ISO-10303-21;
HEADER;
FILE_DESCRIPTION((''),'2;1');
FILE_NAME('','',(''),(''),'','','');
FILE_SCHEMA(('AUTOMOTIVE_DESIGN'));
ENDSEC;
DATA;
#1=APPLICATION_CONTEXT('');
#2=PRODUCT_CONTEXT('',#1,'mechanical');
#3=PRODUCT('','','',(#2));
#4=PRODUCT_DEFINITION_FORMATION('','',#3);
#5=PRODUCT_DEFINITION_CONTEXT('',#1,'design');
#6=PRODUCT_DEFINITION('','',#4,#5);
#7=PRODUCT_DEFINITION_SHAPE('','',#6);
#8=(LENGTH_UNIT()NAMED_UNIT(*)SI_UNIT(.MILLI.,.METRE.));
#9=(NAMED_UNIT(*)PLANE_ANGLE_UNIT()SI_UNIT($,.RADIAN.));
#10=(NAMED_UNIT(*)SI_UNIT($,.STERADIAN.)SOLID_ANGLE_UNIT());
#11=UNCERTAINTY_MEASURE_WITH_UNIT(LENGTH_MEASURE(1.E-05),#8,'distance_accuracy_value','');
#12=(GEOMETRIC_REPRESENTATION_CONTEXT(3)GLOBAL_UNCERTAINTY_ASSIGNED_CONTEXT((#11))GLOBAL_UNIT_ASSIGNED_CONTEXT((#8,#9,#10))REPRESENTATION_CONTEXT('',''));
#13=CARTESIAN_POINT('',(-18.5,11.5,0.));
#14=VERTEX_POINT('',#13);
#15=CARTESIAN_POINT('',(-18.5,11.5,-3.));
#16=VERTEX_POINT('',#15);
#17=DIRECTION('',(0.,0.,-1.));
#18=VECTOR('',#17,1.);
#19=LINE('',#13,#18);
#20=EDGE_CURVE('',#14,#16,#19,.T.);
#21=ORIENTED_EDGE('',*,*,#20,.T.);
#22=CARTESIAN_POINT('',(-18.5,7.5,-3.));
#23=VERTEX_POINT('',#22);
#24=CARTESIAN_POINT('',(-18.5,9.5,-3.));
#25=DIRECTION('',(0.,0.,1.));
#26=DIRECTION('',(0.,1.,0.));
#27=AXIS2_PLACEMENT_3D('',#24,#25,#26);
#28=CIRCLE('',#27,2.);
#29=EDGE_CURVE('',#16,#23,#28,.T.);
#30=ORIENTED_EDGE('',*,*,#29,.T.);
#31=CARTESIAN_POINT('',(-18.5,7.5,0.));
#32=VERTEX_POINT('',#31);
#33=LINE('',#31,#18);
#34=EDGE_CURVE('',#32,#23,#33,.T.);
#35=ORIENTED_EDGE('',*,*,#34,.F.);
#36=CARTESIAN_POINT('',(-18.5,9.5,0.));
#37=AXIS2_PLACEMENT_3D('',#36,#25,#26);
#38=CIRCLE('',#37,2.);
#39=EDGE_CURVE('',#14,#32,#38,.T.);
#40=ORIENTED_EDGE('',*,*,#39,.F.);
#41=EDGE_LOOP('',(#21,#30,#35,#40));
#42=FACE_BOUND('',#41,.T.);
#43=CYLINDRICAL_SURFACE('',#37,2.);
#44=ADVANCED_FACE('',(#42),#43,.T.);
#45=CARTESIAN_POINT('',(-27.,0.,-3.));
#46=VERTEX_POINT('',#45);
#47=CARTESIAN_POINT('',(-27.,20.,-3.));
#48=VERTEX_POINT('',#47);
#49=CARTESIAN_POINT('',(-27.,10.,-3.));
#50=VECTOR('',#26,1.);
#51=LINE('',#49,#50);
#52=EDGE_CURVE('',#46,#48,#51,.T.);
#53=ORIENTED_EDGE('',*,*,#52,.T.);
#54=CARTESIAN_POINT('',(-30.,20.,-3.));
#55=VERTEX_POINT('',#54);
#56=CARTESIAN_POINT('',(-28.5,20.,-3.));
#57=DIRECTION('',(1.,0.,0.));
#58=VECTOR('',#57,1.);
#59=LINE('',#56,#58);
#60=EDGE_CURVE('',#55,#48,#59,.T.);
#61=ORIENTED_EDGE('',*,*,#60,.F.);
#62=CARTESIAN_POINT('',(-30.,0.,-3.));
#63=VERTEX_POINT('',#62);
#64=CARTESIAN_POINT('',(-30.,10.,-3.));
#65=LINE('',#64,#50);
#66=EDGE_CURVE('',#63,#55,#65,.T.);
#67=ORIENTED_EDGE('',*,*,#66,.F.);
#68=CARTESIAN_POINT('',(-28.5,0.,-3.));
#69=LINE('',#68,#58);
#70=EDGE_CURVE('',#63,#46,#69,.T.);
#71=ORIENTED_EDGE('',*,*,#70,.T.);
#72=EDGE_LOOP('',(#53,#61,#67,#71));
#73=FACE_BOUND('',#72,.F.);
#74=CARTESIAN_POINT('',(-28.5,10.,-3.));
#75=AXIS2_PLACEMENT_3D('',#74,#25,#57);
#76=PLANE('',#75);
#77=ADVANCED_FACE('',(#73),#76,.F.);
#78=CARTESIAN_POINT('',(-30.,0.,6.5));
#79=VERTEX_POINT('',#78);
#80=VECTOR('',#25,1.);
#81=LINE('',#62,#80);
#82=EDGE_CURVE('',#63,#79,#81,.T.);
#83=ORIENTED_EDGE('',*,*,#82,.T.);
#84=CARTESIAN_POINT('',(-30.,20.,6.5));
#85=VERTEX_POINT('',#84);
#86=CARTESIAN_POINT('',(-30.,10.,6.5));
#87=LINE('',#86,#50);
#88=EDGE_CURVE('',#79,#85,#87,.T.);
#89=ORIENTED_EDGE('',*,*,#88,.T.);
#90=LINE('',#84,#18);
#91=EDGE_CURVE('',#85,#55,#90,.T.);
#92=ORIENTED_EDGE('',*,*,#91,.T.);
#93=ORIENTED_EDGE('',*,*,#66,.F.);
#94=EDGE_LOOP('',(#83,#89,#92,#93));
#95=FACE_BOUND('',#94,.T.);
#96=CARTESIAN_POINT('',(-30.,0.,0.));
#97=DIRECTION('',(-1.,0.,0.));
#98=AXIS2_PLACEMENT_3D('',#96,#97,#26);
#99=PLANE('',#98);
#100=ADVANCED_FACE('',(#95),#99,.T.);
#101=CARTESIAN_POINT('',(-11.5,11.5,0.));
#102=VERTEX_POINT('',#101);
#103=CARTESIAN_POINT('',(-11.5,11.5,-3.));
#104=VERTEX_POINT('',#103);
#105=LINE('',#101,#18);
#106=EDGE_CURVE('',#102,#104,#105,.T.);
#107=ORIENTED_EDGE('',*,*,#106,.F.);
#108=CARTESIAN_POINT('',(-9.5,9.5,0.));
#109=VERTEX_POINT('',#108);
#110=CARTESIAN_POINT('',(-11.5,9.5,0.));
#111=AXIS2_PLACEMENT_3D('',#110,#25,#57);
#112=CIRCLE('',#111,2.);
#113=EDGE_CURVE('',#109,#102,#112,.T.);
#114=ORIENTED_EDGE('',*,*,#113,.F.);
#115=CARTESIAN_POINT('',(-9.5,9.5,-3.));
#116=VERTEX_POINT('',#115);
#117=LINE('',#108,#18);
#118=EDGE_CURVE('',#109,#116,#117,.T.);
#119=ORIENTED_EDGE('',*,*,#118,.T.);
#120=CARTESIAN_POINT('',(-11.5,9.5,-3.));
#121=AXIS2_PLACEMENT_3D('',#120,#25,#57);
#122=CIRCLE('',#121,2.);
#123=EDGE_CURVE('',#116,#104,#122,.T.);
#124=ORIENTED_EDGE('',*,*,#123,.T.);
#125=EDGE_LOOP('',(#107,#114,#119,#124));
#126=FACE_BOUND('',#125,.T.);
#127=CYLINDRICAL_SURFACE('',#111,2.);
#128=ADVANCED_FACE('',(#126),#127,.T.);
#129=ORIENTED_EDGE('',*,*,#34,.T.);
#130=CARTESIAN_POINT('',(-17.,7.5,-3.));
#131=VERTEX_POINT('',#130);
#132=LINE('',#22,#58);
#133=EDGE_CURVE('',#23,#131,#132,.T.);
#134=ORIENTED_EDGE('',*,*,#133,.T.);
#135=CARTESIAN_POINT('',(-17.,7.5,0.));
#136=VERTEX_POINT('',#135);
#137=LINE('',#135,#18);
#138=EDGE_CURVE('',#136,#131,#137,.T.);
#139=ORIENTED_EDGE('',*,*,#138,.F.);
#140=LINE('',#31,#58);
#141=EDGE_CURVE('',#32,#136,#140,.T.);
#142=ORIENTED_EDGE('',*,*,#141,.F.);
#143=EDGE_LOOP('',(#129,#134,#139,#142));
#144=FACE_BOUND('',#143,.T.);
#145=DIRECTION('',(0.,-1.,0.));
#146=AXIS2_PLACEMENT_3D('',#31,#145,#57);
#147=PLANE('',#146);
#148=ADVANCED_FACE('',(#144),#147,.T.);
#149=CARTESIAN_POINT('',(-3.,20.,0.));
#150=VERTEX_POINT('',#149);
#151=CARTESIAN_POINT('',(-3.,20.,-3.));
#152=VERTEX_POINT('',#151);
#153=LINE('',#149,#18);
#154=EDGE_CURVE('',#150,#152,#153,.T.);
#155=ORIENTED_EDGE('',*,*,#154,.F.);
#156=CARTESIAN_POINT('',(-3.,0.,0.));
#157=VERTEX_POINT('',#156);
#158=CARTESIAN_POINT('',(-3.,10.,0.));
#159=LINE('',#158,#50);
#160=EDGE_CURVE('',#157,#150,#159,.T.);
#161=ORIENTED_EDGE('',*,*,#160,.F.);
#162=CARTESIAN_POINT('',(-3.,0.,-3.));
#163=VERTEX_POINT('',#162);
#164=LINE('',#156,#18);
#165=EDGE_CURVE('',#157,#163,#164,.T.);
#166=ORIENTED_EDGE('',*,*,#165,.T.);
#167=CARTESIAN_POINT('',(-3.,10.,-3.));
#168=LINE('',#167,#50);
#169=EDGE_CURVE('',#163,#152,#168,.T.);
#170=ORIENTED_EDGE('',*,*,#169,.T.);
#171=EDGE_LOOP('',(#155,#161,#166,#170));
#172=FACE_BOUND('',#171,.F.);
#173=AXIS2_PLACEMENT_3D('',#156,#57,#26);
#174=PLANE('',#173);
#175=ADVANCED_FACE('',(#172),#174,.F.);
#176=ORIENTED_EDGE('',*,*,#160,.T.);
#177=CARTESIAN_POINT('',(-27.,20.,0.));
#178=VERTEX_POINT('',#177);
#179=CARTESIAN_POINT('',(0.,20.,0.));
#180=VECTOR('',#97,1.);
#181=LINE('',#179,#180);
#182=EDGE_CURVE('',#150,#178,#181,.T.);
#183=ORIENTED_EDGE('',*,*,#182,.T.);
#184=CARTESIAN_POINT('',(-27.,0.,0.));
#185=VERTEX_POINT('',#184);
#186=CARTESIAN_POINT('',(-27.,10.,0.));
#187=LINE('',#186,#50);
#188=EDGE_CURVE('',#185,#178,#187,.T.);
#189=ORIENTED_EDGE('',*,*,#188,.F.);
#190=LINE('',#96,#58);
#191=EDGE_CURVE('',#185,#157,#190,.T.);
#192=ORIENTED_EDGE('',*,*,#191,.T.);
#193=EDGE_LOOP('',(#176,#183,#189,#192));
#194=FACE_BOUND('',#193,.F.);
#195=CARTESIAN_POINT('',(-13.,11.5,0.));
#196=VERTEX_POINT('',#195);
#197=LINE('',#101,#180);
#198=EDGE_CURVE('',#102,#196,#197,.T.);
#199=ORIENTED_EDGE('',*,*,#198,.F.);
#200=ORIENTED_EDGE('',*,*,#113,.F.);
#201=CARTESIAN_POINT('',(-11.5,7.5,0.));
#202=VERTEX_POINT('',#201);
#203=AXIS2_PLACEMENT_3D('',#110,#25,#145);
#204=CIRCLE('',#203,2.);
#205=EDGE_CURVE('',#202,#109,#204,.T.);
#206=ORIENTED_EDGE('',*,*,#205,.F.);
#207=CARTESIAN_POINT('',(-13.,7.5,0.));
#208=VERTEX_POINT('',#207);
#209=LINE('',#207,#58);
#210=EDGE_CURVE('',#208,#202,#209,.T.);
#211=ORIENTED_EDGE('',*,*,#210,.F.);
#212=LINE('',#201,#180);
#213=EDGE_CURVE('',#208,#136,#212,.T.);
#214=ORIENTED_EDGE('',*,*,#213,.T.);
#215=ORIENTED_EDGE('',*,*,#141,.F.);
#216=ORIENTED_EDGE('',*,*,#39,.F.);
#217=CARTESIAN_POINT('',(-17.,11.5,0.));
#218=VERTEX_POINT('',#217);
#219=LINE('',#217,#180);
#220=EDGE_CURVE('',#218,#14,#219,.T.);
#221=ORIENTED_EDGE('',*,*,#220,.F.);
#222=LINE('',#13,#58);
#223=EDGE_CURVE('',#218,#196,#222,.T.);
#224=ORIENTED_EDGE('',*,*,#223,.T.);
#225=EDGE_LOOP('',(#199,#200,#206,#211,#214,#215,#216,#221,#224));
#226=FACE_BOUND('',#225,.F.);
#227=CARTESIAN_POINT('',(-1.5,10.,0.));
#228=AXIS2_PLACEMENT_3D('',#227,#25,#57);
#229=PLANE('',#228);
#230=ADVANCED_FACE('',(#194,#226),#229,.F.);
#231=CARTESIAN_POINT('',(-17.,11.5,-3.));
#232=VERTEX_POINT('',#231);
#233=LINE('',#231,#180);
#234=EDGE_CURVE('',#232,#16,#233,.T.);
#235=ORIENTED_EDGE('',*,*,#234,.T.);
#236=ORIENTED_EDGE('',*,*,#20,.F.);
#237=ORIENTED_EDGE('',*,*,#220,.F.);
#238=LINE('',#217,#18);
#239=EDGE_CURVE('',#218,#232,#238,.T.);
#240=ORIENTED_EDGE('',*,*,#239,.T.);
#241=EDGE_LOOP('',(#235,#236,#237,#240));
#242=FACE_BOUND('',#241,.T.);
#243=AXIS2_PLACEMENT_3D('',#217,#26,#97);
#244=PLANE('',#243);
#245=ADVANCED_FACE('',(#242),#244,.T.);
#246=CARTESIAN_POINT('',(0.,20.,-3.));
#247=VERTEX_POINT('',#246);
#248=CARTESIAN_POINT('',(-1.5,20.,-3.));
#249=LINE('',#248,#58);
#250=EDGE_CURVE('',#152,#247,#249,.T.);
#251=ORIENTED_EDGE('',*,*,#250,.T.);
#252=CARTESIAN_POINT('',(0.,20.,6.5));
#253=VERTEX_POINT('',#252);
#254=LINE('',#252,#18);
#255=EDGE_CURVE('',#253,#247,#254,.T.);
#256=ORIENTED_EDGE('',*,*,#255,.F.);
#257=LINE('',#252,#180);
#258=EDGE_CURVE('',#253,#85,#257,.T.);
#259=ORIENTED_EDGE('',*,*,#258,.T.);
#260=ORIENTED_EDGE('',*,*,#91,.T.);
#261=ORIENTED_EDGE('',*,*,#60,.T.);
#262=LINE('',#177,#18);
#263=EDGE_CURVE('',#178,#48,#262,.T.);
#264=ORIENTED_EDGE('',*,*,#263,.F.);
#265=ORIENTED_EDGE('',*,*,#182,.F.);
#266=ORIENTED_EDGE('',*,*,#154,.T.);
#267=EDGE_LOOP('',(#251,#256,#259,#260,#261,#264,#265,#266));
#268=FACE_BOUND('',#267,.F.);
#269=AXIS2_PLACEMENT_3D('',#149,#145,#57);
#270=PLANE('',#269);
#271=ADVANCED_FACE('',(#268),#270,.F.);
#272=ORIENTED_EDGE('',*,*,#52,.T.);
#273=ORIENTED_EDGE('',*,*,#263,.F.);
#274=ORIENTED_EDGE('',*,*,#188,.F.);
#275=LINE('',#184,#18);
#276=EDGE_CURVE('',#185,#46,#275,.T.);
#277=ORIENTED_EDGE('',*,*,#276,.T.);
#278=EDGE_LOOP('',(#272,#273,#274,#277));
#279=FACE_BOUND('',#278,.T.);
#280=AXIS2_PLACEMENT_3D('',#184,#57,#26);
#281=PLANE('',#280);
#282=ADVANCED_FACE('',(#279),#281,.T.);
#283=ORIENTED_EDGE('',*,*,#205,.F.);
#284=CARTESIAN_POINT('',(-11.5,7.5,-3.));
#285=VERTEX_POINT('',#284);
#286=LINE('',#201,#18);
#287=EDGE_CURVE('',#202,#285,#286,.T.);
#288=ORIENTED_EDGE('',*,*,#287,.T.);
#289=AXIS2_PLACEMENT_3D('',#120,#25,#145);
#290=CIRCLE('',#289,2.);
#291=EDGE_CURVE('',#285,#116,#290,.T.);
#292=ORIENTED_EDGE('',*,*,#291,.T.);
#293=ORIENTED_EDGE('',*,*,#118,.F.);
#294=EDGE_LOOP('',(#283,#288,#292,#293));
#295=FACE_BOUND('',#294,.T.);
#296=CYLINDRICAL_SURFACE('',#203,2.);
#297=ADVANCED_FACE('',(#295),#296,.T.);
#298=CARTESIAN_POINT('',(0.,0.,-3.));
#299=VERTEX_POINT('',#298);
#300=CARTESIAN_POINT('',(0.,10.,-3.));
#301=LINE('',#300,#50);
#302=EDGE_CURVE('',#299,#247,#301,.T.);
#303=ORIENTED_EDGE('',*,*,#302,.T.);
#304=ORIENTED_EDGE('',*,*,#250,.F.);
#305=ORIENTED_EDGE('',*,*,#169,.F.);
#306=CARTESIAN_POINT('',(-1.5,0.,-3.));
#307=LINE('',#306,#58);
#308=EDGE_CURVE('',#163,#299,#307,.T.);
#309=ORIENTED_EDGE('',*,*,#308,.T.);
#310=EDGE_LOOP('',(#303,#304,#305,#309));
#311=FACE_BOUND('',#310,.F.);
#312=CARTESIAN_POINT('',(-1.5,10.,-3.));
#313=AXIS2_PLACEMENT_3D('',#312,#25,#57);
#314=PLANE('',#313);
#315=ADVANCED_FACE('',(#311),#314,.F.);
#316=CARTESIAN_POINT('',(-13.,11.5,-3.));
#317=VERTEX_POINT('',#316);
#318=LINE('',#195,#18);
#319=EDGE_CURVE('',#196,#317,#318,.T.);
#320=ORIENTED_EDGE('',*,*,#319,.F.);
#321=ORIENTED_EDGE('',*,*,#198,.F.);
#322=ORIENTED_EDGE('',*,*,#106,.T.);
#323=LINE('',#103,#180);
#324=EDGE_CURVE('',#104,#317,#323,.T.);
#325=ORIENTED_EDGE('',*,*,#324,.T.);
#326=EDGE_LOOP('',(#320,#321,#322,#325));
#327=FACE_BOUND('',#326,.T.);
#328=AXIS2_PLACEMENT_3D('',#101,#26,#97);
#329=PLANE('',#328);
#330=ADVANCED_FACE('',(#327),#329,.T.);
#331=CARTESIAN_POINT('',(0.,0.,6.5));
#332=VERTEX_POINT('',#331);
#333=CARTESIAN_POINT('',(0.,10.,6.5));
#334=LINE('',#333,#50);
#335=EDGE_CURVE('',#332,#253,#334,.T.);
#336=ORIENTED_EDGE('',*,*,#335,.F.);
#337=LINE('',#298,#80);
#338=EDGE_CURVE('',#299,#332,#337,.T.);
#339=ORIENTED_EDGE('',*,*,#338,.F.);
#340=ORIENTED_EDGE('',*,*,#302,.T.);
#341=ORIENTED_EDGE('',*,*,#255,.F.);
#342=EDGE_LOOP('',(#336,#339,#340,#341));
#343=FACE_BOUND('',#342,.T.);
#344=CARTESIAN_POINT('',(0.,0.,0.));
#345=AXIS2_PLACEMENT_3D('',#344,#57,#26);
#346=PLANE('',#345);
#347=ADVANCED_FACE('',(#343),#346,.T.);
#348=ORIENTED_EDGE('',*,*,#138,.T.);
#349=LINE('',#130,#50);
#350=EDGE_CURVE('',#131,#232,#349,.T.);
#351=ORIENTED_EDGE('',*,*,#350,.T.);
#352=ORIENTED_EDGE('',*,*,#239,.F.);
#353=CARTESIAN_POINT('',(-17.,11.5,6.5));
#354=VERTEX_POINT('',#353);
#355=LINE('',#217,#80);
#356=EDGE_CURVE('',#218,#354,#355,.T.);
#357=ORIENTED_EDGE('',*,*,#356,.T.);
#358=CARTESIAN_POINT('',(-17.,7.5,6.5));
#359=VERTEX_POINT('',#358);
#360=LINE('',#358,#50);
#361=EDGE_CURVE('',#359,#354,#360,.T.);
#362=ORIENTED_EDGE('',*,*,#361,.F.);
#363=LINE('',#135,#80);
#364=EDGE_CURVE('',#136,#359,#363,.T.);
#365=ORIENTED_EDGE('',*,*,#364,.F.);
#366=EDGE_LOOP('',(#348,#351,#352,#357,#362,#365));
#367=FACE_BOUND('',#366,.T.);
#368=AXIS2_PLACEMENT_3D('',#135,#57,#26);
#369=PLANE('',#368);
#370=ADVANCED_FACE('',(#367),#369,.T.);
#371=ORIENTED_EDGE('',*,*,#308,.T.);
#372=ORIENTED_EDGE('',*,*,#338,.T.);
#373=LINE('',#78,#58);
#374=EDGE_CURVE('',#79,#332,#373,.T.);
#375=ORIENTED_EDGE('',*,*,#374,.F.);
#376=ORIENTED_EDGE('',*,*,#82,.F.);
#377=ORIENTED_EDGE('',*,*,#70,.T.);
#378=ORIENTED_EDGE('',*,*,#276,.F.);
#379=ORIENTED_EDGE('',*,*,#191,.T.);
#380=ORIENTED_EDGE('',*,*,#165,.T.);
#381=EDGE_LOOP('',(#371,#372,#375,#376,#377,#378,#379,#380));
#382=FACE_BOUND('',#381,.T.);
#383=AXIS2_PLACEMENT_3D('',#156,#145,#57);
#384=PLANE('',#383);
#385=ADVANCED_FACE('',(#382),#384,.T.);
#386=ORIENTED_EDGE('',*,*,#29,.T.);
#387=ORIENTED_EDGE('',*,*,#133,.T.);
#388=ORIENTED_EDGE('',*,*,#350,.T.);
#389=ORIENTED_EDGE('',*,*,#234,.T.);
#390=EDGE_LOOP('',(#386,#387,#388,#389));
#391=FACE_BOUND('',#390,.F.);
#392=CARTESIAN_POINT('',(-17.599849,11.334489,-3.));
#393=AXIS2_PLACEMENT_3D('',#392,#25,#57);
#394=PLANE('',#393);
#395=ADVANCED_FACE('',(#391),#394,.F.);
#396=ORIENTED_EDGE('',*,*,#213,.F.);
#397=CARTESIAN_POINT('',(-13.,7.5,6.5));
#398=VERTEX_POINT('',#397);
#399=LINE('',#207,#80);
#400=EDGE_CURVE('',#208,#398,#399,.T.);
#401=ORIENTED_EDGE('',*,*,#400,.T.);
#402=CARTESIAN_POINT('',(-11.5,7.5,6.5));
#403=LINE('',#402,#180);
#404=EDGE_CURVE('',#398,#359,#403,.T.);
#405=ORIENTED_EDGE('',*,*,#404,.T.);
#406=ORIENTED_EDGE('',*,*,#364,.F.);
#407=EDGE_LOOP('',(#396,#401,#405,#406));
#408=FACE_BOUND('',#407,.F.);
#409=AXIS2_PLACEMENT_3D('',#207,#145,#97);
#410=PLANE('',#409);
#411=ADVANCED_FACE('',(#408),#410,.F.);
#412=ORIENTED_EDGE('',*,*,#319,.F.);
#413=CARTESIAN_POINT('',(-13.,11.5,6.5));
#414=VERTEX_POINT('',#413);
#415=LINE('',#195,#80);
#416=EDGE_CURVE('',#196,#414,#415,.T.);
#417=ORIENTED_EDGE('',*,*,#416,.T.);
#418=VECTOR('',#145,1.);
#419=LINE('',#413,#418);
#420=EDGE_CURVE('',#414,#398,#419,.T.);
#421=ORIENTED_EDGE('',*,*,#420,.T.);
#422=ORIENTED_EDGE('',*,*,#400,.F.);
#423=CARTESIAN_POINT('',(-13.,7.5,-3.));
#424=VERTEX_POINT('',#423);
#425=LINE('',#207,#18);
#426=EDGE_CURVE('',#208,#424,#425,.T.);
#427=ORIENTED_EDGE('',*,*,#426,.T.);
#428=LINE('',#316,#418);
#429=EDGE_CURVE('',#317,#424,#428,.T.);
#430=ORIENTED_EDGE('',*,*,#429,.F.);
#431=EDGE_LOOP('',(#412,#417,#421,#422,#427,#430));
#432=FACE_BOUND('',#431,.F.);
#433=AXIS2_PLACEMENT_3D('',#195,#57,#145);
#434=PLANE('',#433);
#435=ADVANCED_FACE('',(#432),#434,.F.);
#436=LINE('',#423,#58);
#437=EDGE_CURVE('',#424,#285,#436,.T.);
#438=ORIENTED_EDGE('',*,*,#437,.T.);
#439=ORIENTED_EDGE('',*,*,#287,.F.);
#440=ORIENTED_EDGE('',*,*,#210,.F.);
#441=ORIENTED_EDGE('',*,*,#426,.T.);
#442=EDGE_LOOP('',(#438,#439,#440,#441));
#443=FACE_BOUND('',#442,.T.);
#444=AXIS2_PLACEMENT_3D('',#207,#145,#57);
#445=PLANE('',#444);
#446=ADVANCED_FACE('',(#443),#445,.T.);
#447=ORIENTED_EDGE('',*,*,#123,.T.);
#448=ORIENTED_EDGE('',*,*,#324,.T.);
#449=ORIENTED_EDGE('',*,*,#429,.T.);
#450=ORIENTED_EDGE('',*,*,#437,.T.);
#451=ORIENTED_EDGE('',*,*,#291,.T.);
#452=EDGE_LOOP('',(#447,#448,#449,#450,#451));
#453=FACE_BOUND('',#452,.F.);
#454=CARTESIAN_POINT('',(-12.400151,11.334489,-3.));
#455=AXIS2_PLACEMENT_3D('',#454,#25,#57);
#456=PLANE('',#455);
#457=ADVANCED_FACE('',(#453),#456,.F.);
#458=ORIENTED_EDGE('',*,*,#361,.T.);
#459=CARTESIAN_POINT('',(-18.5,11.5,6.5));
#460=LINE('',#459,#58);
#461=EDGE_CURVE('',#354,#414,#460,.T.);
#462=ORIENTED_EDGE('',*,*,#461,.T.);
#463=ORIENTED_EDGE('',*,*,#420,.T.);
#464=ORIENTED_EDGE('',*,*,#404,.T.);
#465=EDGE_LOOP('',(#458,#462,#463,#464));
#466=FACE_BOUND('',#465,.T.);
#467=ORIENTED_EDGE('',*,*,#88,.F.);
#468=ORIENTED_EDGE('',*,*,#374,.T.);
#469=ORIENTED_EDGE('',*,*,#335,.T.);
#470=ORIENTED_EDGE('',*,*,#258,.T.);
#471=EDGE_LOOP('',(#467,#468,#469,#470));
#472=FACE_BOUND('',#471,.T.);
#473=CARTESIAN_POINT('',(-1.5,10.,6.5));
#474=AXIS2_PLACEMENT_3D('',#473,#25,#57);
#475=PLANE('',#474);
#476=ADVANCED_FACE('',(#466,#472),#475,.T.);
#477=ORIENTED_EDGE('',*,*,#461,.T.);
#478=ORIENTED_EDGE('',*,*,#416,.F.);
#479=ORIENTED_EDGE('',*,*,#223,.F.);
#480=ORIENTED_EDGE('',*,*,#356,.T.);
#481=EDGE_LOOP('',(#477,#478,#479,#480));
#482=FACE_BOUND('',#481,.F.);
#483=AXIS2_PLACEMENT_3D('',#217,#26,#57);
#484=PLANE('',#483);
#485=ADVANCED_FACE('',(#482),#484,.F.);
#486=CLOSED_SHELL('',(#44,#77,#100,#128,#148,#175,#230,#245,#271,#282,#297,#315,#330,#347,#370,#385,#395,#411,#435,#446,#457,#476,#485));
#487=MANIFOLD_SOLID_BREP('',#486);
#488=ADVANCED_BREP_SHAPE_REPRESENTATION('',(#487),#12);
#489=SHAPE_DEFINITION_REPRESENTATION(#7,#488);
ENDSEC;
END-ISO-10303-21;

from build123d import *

# Parameters (mm, degrees)
F0_W     = 3
F0_H     = 20
F1_DEPTH = 6.5
F2_DEPTH = 3
F3_DEPTH = 3


# Not quite as in the source:
# - a feature names something its author has since deleted; it is built from what else it names


with BuildPart() as f1:
    # F0 (on Top) → F1 (new body)
    with BuildSketch(Plane.XY):
        with Locations((-1.5, 10)):
            Rectangle(F0_W, F0_H)
        Polygon((-27, 0), (-3, 0), (-3, 20), (-15, 20), (-27, 20), align=None)
        with BuildLine():
            Line((-17, 11.5), (-15, 11.5))
            Line((-15, 11.5), (-13, 11.5))
            Line((-13, 11.5), (-11.5, 11.5))
            ThreePointArc((-11.5, 11.5), (-10.0857864376, 10.9142135624), (-9.5, 9.5))
            ThreePointArc((-9.5, 9.5), (-10.0857864376, 8.0857864376), (-11.5, 7.5))
            Line((-11.5, 7.5), (-13, 7.5))
            Line((-13, 7.5), (-17, 7.5))
            Line((-17, 7.5), (-18.5, 7.5))
            ThreePointArc((-18.5, 7.5), (-20.5, 9.5), (-18.5, 11.5))
            Line((-18.5, 11.5), (-17, 11.5))
        make_face(mode=Mode.SUBTRACT)
        with Locations((-28.5, 10)):
            Rectangle(F0_W, F0_H)
        with BuildLine():
            Line((-17, 10.8228756555), (-17, 11.5))
            Line((-17, 11.5), (-18.5, 11.5))
            ThreePointArc((-18.5, 11.5), (-17.6771243445, 11.3228756555), (-17, 10.8228756555))
        make_face()
        with BuildLine():
            Line((-11.5, 11.5), (-13, 11.5))
            Line((-13, 11.5), (-13, 10.8228756555))
            ThreePointArc((-13, 10.8228756555), (-12.3228756555, 11.3228756555), (-11.5, 11.5))
        make_face()
        with BuildLine():
            ThreePointArc((-17, 10.8228756555), (-17.6771243445, 11.3228756555), (-18.5, 11.5))
            ThreePointArc((-18.5, 11.5), (-20.5, 9.5), (-18.5, 7.5))
            Line((-18.5, 7.5), (-17, 7.5))
            Line((-17, 7.5), (-17, 9.5))
            Line((-17, 9.5), (-17, 10.8228756555))
        make_face()
        with BuildLine():
            ThreePointArc((-9.5, 9.5), (-10.0857864376, 10.9142135624), (-11.5, 11.5))
            ThreePointArc((-11.5, 11.5), (-12.3228756555, 11.3228756555), (-13, 10.8228756555))
            Line((-13, 10.8228756555), (-13, 8.1771243445))
            ThreePointArc((-13, 8.1771243445), (-12.3228756555, 7.6771243445), (-11.5, 7.5))
            ThreePointArc((-11.5, 7.5), (-10.0857864376, 8.0857864376), (-9.5, 9.5))
        make_face()
        with BuildLine():
            ThreePointArc((-11.5, 7.5), (-12.3228756555, 7.6771243445), (-13, 8.1771243445))
            Line((-13, 8.1771243445), (-13, 7.5))
            Line((-13, 7.5), (-11.5, 7.5))
        make_face()
    extrude(amount=F1_DEPTH)

    # F0 (on Top) → F2 (join)
    with BuildSketch(Plane.XY):
        with Locations((-1.5, 10)):
            Rectangle(F0_W, F0_H)
        with Locations((-28.5, 10)):
            Rectangle(F0_W, F0_H)
        with BuildLine():
            Line((-17, 10.8228756555), (-17, 11.5))
            Line((-17, 11.5), (-18.5, 11.5))
            ThreePointArc((-18.5, 11.5), (-17.6771243445, 11.3228756555), (-17, 10.8228756555))
        make_face()
        with BuildLine():
            Line((-11.5, 11.5), (-13, 11.5))
            Line((-13, 11.5), (-13, 10.8228756555))
            ThreePointArc((-13, 10.8228756555), (-12.3228756555, 11.3228756555), (-11.5, 11.5))
        make_face()
        with BuildLine():
            ThreePointArc((-17, 10.8228756555), (-17.6771243445, 11.3228756555), (-18.5, 11.5))
            ThreePointArc((-18.5, 11.5), (-20.5, 9.5), (-18.5, 7.5))
            Line((-18.5, 7.5), (-17, 7.5))
            Line((-17, 7.5), (-17, 9.5))
            Line((-17, 9.5), (-17, 10.8228756555))
        make_face()
        with BuildLine():
            ThreePointArc((-9.5, 9.5), (-10.0857864376, 10.9142135624), (-11.5, 11.5))
            ThreePointArc((-11.5, 11.5), (-12.3228756555, 11.3228756555), (-13, 10.8228756555))
            Line((-13, 10.8228756555), (-13, 8.1771243445))
            ThreePointArc((-13, 8.1771243445), (-12.3228756555, 7.6771243445), (-11.5, 7.5))
            ThreePointArc((-11.5, 7.5), (-10.0857864376, 8.0857864376), (-9.5, 9.5))
        make_face()
        with BuildLine():
            ThreePointArc((-11.5, 7.5), (-12.3228756555, 7.6771243445), (-13, 8.1771243445))
            Line((-13, 8.1771243445), (-13, 7.5))
            Line((-13, 7.5), (-11.5, 7.5))
        make_face()
    extrude(amount=-F2_DEPTH)

    # F0 (on Top) → F3 (join)
    with BuildSketch(Plane.XY):
        with Locations((-28.5, 10)):
            Rectangle(F0_W, F0_H)
        with Locations((-1.5, 10)):
            Rectangle(F0_W, F0_H)
    extrude(amount=-F3_DEPTH)


solid = f1.part
